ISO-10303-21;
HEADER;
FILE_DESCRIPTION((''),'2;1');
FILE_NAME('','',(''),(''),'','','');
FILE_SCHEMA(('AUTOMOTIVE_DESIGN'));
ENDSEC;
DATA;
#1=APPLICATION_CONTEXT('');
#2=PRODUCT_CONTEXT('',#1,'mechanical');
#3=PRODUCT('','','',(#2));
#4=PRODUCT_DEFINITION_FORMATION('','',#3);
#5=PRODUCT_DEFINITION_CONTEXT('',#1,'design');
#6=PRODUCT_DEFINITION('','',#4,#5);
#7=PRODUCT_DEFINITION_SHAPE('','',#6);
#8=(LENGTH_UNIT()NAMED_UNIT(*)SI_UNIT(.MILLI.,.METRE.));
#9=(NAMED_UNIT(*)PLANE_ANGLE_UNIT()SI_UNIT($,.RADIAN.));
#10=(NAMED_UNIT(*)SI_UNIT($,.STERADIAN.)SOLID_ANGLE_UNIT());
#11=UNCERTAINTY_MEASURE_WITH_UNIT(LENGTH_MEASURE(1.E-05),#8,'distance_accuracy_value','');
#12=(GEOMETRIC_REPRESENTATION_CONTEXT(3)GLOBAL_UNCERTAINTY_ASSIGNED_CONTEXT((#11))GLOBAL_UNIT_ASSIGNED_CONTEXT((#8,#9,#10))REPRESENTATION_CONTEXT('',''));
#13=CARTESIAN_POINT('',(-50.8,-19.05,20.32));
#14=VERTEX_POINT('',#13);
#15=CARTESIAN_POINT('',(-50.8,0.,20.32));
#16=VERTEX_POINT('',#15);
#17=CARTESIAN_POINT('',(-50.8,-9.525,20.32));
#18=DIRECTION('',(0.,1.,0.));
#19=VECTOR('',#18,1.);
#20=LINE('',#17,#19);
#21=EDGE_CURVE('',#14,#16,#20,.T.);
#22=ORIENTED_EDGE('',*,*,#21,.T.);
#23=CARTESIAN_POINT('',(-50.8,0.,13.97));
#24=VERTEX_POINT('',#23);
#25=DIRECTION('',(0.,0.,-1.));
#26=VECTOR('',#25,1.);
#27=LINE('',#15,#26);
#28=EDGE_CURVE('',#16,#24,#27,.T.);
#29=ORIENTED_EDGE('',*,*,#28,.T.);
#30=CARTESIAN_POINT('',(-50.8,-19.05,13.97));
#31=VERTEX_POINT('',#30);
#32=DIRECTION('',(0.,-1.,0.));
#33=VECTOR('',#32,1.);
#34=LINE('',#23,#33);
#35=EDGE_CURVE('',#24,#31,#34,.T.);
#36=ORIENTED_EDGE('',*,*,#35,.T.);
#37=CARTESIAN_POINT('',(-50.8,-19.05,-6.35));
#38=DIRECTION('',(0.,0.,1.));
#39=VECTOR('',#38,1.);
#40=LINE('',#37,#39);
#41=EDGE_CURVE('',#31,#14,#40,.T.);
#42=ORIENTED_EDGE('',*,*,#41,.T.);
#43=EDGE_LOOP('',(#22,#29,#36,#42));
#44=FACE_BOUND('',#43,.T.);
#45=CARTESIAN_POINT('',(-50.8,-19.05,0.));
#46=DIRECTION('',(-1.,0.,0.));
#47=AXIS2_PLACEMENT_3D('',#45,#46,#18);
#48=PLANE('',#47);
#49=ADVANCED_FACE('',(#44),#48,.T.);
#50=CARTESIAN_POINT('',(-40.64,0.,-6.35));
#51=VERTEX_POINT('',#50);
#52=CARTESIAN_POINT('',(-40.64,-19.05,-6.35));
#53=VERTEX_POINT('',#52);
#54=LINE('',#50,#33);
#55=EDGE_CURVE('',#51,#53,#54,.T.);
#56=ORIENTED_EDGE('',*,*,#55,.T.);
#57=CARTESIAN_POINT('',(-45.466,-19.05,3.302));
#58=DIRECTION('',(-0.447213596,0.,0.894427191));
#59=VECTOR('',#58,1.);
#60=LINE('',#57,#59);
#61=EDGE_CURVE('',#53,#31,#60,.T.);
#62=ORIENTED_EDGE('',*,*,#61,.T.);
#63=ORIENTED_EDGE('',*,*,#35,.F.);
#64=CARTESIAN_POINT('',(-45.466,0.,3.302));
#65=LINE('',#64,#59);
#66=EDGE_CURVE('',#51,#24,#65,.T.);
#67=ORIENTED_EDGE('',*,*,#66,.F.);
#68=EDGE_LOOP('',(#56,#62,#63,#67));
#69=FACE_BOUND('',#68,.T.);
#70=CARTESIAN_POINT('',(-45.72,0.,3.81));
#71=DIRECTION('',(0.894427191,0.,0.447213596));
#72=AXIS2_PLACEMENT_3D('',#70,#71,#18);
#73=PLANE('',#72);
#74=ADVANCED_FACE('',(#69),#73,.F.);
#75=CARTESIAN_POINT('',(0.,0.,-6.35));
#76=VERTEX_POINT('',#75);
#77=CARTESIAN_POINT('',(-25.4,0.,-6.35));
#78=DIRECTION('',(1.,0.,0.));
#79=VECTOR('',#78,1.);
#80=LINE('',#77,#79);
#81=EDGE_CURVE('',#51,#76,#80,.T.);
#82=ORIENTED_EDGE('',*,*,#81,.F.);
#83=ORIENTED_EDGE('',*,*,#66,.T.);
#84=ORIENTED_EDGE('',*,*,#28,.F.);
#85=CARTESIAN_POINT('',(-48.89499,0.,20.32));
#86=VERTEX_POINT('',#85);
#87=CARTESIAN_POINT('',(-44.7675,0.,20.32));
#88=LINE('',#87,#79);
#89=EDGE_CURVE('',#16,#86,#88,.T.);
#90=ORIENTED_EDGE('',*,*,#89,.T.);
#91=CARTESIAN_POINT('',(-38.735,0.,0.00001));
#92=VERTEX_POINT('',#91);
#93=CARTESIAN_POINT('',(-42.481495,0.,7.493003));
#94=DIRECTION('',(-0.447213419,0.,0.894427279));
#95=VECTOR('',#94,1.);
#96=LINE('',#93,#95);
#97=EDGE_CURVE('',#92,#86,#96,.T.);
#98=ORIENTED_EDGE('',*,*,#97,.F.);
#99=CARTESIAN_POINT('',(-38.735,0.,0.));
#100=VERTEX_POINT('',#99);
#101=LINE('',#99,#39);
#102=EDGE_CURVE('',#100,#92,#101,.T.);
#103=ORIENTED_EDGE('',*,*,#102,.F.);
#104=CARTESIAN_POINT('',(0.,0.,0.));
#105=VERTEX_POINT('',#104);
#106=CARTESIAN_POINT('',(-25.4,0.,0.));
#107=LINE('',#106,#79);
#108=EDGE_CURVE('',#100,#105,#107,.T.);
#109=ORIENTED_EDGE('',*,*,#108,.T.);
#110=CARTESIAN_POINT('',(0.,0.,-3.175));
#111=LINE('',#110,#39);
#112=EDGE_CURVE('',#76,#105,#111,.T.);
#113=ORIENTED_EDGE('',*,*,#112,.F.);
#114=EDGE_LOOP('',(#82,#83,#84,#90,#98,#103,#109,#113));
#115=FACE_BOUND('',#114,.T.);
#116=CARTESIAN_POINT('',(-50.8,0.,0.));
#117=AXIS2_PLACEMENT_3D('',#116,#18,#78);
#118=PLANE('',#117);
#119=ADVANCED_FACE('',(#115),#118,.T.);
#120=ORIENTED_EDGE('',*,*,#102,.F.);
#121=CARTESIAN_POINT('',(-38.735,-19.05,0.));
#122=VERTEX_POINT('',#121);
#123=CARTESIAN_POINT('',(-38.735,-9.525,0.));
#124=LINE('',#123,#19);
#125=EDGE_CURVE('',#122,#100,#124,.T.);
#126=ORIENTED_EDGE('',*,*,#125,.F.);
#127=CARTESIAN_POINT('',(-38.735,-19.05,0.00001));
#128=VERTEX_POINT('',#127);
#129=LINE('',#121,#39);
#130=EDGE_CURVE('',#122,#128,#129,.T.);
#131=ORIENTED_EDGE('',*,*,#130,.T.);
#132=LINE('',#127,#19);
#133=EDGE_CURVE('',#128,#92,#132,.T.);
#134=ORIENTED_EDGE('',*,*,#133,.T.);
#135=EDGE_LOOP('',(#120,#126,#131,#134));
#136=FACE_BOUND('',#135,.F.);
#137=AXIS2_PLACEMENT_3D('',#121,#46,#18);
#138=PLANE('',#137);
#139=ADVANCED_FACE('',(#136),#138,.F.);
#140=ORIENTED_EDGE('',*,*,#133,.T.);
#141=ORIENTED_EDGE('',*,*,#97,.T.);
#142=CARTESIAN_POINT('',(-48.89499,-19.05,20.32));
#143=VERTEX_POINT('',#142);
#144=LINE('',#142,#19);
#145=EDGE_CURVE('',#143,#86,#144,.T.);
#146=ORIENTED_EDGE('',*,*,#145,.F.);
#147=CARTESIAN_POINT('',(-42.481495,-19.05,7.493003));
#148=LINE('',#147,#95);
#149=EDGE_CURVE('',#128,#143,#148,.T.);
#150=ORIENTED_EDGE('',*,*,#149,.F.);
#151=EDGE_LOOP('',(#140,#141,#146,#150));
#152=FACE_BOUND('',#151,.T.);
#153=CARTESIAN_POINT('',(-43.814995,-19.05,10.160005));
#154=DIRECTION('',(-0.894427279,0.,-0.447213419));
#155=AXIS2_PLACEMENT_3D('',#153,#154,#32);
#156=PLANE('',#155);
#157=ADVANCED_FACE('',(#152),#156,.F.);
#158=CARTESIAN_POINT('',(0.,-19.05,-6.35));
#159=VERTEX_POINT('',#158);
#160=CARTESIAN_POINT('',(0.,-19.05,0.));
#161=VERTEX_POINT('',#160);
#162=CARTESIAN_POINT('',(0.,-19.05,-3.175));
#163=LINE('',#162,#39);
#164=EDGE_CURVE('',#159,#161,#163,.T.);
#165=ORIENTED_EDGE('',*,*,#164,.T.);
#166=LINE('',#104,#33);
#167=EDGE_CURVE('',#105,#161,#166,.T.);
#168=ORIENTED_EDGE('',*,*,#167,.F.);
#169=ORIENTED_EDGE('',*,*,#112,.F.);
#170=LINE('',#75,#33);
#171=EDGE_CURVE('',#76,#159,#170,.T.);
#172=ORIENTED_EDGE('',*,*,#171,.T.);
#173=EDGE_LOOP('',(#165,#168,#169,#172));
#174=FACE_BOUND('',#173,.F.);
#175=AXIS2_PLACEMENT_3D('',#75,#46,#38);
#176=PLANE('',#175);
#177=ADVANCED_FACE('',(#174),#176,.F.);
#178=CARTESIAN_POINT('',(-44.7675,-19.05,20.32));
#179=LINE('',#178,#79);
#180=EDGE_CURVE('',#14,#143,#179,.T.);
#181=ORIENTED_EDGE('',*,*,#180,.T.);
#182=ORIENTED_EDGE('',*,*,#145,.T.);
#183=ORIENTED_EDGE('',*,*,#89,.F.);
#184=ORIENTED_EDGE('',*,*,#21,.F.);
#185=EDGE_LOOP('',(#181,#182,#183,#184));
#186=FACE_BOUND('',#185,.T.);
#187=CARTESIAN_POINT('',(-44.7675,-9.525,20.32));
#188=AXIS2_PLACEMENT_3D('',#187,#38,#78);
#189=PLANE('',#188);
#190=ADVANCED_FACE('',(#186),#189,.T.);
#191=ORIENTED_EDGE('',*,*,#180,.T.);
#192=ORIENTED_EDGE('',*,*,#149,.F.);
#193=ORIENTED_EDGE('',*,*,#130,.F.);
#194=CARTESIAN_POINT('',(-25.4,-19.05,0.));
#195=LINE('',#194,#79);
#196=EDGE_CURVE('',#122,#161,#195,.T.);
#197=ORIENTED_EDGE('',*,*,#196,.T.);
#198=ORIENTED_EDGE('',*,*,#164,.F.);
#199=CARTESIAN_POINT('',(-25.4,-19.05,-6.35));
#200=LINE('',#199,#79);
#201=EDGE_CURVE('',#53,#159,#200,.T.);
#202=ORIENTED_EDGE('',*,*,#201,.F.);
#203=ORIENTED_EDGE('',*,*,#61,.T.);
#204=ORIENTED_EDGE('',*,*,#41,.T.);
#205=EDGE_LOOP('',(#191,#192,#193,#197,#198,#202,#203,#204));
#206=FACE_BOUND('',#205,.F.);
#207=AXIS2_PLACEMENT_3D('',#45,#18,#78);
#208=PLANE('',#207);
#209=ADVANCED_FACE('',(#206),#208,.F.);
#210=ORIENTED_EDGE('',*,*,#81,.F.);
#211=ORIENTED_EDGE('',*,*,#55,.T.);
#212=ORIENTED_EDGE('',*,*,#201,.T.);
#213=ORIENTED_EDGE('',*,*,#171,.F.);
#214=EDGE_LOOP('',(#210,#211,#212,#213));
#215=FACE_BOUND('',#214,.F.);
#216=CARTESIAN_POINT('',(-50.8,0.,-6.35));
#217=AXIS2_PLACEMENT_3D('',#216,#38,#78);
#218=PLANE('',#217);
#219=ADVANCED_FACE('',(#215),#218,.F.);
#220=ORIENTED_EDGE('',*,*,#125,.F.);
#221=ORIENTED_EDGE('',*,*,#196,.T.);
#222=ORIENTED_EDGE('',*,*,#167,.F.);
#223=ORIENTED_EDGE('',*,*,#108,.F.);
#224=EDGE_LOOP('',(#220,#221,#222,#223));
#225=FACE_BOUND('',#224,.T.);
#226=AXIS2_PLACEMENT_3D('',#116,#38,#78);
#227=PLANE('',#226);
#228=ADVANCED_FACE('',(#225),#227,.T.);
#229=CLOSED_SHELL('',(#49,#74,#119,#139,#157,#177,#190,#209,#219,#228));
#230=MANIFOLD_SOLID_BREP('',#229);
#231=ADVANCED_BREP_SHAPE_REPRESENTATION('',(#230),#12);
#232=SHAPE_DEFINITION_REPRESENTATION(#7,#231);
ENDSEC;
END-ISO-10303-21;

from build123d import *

# Parameters (mm, degrees)
F0_W     = 50.8
F0_H     = 6.35
F1_DEPTH = 19.05
F2_W     = 12.065
F2_H     = 19.05
F3_DEPTH = 20.32
F4_SIZE2 = 10.15999
F4_SIZE  = 20.31999
F5_SIZE2 = 20.32
F5_SIZE  = 10.16


# Not quite as in the source:
# - a fillet or chamfer is up to 0.001 mm smaller than in the source, because OpenCascade refuses the exact size


with BuildPart() as f1:
    # F0 (on Front) → F1 (new body)
    with BuildSketch(Plane.XZ):
        with Locations((-25.4, -3.175)):
            Rectangle(F0_W, F0_H)
    extrude(amount=F1_DEPTH)

    # F2 (on face) → F3 (join)
    with BuildSketch(Plane.XY):
        with Locations((-44.7675, -9.525)):
            Rectangle(F2_W, F2_H)
    extrude(amount=F3_DEPTH)

    # F4 (size 20.32 and 10.16 in the source; OpenCascade refuses exactly that, so slightly less here)
    f4_edges = [f1.edges().sort_by_distance(p)[0] for p in [
        (-38.735, -9.525, 20.32),
    ]]
    f4_side = f1.faces().sort_by_distance((-38.735, -9.525, 10.16))[0]
    chamfer(f4_edges, length=F4_SIZE, length2=F4_SIZE2, reference=f4_side)

    # F5
    f5_edges = [f1.edges().sort_by_distance(p)[0] for p in [
        (-50.8, -9.525, -6.35),
    ]]
    f5_side = f1.faces().sort_by_distance((-25.4, -9.525, -6.35))[0]
    chamfer(f5_edges, length=F5_SIZE, length2=F5_SIZE2, reference=f5_side)


solid = f1.part
